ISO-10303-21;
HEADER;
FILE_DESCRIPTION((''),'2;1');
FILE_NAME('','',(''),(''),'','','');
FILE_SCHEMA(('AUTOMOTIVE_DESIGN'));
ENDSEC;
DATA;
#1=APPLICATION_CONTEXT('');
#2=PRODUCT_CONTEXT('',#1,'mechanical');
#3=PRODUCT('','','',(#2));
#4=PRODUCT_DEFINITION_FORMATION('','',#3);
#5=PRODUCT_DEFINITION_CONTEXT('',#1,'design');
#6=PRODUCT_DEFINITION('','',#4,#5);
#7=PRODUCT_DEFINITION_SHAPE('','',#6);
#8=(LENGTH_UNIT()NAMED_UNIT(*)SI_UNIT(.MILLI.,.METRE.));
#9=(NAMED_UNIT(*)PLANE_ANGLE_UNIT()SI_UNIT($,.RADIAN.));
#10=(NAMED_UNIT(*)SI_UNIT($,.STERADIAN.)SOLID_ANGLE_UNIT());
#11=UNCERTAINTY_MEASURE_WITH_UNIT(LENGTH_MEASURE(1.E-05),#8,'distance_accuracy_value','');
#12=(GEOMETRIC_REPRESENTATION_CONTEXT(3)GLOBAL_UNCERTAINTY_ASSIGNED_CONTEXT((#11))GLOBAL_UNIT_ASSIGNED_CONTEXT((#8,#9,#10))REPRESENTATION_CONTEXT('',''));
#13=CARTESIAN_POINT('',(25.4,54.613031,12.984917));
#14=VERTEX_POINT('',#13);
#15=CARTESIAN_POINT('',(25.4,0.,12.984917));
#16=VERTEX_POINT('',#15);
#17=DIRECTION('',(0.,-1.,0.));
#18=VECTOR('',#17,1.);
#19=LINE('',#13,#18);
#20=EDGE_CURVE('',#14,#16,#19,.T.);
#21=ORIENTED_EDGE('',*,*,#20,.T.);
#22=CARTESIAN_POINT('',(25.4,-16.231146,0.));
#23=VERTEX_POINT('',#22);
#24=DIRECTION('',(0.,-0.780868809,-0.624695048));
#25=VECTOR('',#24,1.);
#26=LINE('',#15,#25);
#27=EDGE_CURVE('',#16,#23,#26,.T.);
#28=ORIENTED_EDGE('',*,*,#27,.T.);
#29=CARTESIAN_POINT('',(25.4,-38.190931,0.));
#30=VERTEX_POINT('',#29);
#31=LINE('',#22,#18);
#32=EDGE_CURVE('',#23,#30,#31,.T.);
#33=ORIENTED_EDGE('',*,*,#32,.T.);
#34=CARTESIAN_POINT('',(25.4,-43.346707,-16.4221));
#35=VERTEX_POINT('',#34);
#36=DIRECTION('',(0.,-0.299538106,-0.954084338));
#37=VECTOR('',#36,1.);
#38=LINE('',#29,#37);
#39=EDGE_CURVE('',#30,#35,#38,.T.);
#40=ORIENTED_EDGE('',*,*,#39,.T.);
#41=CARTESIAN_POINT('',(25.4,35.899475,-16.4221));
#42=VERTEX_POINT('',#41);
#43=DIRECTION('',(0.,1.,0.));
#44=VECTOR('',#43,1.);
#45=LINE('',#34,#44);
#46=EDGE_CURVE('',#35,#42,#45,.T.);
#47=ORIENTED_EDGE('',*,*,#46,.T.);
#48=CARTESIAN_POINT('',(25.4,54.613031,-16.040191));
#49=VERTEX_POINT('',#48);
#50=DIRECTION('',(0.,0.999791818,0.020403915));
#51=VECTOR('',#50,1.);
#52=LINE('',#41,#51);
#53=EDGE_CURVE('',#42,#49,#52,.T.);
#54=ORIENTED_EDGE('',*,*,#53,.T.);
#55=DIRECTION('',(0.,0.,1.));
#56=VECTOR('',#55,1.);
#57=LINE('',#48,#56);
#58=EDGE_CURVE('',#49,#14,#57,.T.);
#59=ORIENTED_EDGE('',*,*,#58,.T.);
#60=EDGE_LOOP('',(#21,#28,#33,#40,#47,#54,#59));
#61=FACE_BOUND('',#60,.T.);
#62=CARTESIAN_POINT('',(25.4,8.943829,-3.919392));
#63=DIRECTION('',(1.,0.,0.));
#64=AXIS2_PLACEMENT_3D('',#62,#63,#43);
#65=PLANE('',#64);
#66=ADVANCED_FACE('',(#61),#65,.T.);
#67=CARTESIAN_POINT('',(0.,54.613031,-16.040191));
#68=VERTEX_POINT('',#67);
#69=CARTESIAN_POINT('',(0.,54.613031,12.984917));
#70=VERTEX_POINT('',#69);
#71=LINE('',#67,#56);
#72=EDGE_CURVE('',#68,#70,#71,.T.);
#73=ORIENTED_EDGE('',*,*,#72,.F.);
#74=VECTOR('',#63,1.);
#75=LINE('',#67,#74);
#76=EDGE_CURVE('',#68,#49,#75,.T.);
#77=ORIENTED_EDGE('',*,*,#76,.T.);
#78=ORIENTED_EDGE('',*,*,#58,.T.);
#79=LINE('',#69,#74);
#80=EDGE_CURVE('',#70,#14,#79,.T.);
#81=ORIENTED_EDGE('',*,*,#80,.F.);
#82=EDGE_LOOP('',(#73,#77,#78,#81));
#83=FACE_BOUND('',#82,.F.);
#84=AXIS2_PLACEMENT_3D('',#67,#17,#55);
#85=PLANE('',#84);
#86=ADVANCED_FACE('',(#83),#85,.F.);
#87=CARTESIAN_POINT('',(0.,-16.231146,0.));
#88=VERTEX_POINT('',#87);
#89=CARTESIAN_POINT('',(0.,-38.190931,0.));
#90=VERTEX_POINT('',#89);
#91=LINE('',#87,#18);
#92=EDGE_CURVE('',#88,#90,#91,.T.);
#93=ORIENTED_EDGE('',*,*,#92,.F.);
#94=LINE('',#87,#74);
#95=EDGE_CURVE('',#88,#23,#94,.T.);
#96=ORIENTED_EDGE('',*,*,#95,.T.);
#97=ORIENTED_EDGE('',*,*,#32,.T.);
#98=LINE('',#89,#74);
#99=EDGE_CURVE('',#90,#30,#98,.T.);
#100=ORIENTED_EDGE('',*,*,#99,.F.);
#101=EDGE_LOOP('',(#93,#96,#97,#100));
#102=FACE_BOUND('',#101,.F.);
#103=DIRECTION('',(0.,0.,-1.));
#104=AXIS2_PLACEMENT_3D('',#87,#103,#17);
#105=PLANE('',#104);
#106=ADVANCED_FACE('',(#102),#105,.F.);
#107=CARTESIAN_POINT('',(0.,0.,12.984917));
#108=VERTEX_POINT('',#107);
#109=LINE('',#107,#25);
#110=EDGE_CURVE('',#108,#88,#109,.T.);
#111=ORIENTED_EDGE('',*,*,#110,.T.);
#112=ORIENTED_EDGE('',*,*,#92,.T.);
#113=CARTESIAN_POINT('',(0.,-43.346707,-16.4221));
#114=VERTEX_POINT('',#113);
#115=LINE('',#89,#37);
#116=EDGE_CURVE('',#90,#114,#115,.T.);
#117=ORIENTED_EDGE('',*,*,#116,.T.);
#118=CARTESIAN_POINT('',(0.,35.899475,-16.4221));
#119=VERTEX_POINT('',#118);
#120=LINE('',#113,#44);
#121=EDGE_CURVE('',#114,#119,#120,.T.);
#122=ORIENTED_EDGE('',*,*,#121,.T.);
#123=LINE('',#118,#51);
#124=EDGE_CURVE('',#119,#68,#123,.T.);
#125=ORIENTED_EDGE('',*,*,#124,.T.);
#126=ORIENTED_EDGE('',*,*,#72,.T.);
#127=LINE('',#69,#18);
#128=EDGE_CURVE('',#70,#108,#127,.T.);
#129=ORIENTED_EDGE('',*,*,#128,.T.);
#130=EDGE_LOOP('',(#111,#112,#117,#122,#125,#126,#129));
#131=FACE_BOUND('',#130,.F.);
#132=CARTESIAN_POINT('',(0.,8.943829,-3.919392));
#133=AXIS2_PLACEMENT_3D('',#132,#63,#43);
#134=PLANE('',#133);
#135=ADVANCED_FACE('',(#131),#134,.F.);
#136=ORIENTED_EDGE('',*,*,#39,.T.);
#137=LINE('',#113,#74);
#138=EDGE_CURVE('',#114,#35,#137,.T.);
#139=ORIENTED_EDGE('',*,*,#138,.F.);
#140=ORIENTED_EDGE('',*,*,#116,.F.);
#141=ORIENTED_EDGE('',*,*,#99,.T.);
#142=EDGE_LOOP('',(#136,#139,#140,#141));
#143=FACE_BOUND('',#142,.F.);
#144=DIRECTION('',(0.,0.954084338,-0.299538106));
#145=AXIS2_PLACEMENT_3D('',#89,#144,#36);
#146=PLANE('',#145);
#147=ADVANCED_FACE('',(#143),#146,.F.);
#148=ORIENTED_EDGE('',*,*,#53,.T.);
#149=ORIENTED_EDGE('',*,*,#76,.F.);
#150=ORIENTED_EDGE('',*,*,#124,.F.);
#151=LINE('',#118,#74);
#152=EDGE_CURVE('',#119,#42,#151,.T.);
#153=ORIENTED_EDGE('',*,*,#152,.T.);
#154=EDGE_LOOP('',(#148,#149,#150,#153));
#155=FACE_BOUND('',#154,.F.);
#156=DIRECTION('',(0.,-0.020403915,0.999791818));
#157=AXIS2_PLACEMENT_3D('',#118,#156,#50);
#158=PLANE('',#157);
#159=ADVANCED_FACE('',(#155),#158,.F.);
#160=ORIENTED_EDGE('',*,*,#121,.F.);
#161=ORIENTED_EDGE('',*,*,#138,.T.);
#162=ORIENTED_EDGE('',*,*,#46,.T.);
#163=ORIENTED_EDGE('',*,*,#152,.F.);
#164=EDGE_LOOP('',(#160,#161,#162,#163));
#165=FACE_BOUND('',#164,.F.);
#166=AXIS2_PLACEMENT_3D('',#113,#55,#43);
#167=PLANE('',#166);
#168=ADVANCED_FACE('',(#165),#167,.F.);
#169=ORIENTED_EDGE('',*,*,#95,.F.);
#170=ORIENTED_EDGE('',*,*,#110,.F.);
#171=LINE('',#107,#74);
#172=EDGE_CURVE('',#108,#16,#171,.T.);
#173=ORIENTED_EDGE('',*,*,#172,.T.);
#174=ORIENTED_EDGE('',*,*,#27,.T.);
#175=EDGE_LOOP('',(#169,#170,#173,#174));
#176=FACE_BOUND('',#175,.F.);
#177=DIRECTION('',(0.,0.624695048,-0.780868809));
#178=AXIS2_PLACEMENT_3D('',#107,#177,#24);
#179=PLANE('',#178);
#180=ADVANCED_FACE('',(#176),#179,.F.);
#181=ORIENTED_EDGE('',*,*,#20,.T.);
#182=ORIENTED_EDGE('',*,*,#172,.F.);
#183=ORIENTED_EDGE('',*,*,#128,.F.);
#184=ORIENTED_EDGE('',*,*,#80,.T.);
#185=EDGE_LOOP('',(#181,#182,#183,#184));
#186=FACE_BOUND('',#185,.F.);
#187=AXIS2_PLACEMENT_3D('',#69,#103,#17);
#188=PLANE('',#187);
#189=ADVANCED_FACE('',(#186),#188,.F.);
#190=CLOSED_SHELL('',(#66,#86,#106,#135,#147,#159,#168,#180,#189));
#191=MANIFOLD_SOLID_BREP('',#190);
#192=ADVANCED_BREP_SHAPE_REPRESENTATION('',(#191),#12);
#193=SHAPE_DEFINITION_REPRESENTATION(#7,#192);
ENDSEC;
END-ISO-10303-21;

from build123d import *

# Parameters (mm, degrees)
F1_DEPTH = 25.4


# Not quite as in the source:
# - a feature names something its author has since deleted; it is built from what else it names


with BuildPart() as f1:
    # F0 (on Right) → F1 (new body)
    with BuildSketch(Plane.YZ):
        Polygon((-16.2311457098, 0), (-38.1909310818, 0), (-43.3467067778, -16.4221003652), (35.8994752169, -16.4221003652), (54.6130314469, -16.0401910543), (54.6130314469, 12.9849165678), (35.8994752169, 12.9849165678), (0, 12.9849165678), align=None)
    extrude(amount=F1_DEPTH)


solid = f1.part
